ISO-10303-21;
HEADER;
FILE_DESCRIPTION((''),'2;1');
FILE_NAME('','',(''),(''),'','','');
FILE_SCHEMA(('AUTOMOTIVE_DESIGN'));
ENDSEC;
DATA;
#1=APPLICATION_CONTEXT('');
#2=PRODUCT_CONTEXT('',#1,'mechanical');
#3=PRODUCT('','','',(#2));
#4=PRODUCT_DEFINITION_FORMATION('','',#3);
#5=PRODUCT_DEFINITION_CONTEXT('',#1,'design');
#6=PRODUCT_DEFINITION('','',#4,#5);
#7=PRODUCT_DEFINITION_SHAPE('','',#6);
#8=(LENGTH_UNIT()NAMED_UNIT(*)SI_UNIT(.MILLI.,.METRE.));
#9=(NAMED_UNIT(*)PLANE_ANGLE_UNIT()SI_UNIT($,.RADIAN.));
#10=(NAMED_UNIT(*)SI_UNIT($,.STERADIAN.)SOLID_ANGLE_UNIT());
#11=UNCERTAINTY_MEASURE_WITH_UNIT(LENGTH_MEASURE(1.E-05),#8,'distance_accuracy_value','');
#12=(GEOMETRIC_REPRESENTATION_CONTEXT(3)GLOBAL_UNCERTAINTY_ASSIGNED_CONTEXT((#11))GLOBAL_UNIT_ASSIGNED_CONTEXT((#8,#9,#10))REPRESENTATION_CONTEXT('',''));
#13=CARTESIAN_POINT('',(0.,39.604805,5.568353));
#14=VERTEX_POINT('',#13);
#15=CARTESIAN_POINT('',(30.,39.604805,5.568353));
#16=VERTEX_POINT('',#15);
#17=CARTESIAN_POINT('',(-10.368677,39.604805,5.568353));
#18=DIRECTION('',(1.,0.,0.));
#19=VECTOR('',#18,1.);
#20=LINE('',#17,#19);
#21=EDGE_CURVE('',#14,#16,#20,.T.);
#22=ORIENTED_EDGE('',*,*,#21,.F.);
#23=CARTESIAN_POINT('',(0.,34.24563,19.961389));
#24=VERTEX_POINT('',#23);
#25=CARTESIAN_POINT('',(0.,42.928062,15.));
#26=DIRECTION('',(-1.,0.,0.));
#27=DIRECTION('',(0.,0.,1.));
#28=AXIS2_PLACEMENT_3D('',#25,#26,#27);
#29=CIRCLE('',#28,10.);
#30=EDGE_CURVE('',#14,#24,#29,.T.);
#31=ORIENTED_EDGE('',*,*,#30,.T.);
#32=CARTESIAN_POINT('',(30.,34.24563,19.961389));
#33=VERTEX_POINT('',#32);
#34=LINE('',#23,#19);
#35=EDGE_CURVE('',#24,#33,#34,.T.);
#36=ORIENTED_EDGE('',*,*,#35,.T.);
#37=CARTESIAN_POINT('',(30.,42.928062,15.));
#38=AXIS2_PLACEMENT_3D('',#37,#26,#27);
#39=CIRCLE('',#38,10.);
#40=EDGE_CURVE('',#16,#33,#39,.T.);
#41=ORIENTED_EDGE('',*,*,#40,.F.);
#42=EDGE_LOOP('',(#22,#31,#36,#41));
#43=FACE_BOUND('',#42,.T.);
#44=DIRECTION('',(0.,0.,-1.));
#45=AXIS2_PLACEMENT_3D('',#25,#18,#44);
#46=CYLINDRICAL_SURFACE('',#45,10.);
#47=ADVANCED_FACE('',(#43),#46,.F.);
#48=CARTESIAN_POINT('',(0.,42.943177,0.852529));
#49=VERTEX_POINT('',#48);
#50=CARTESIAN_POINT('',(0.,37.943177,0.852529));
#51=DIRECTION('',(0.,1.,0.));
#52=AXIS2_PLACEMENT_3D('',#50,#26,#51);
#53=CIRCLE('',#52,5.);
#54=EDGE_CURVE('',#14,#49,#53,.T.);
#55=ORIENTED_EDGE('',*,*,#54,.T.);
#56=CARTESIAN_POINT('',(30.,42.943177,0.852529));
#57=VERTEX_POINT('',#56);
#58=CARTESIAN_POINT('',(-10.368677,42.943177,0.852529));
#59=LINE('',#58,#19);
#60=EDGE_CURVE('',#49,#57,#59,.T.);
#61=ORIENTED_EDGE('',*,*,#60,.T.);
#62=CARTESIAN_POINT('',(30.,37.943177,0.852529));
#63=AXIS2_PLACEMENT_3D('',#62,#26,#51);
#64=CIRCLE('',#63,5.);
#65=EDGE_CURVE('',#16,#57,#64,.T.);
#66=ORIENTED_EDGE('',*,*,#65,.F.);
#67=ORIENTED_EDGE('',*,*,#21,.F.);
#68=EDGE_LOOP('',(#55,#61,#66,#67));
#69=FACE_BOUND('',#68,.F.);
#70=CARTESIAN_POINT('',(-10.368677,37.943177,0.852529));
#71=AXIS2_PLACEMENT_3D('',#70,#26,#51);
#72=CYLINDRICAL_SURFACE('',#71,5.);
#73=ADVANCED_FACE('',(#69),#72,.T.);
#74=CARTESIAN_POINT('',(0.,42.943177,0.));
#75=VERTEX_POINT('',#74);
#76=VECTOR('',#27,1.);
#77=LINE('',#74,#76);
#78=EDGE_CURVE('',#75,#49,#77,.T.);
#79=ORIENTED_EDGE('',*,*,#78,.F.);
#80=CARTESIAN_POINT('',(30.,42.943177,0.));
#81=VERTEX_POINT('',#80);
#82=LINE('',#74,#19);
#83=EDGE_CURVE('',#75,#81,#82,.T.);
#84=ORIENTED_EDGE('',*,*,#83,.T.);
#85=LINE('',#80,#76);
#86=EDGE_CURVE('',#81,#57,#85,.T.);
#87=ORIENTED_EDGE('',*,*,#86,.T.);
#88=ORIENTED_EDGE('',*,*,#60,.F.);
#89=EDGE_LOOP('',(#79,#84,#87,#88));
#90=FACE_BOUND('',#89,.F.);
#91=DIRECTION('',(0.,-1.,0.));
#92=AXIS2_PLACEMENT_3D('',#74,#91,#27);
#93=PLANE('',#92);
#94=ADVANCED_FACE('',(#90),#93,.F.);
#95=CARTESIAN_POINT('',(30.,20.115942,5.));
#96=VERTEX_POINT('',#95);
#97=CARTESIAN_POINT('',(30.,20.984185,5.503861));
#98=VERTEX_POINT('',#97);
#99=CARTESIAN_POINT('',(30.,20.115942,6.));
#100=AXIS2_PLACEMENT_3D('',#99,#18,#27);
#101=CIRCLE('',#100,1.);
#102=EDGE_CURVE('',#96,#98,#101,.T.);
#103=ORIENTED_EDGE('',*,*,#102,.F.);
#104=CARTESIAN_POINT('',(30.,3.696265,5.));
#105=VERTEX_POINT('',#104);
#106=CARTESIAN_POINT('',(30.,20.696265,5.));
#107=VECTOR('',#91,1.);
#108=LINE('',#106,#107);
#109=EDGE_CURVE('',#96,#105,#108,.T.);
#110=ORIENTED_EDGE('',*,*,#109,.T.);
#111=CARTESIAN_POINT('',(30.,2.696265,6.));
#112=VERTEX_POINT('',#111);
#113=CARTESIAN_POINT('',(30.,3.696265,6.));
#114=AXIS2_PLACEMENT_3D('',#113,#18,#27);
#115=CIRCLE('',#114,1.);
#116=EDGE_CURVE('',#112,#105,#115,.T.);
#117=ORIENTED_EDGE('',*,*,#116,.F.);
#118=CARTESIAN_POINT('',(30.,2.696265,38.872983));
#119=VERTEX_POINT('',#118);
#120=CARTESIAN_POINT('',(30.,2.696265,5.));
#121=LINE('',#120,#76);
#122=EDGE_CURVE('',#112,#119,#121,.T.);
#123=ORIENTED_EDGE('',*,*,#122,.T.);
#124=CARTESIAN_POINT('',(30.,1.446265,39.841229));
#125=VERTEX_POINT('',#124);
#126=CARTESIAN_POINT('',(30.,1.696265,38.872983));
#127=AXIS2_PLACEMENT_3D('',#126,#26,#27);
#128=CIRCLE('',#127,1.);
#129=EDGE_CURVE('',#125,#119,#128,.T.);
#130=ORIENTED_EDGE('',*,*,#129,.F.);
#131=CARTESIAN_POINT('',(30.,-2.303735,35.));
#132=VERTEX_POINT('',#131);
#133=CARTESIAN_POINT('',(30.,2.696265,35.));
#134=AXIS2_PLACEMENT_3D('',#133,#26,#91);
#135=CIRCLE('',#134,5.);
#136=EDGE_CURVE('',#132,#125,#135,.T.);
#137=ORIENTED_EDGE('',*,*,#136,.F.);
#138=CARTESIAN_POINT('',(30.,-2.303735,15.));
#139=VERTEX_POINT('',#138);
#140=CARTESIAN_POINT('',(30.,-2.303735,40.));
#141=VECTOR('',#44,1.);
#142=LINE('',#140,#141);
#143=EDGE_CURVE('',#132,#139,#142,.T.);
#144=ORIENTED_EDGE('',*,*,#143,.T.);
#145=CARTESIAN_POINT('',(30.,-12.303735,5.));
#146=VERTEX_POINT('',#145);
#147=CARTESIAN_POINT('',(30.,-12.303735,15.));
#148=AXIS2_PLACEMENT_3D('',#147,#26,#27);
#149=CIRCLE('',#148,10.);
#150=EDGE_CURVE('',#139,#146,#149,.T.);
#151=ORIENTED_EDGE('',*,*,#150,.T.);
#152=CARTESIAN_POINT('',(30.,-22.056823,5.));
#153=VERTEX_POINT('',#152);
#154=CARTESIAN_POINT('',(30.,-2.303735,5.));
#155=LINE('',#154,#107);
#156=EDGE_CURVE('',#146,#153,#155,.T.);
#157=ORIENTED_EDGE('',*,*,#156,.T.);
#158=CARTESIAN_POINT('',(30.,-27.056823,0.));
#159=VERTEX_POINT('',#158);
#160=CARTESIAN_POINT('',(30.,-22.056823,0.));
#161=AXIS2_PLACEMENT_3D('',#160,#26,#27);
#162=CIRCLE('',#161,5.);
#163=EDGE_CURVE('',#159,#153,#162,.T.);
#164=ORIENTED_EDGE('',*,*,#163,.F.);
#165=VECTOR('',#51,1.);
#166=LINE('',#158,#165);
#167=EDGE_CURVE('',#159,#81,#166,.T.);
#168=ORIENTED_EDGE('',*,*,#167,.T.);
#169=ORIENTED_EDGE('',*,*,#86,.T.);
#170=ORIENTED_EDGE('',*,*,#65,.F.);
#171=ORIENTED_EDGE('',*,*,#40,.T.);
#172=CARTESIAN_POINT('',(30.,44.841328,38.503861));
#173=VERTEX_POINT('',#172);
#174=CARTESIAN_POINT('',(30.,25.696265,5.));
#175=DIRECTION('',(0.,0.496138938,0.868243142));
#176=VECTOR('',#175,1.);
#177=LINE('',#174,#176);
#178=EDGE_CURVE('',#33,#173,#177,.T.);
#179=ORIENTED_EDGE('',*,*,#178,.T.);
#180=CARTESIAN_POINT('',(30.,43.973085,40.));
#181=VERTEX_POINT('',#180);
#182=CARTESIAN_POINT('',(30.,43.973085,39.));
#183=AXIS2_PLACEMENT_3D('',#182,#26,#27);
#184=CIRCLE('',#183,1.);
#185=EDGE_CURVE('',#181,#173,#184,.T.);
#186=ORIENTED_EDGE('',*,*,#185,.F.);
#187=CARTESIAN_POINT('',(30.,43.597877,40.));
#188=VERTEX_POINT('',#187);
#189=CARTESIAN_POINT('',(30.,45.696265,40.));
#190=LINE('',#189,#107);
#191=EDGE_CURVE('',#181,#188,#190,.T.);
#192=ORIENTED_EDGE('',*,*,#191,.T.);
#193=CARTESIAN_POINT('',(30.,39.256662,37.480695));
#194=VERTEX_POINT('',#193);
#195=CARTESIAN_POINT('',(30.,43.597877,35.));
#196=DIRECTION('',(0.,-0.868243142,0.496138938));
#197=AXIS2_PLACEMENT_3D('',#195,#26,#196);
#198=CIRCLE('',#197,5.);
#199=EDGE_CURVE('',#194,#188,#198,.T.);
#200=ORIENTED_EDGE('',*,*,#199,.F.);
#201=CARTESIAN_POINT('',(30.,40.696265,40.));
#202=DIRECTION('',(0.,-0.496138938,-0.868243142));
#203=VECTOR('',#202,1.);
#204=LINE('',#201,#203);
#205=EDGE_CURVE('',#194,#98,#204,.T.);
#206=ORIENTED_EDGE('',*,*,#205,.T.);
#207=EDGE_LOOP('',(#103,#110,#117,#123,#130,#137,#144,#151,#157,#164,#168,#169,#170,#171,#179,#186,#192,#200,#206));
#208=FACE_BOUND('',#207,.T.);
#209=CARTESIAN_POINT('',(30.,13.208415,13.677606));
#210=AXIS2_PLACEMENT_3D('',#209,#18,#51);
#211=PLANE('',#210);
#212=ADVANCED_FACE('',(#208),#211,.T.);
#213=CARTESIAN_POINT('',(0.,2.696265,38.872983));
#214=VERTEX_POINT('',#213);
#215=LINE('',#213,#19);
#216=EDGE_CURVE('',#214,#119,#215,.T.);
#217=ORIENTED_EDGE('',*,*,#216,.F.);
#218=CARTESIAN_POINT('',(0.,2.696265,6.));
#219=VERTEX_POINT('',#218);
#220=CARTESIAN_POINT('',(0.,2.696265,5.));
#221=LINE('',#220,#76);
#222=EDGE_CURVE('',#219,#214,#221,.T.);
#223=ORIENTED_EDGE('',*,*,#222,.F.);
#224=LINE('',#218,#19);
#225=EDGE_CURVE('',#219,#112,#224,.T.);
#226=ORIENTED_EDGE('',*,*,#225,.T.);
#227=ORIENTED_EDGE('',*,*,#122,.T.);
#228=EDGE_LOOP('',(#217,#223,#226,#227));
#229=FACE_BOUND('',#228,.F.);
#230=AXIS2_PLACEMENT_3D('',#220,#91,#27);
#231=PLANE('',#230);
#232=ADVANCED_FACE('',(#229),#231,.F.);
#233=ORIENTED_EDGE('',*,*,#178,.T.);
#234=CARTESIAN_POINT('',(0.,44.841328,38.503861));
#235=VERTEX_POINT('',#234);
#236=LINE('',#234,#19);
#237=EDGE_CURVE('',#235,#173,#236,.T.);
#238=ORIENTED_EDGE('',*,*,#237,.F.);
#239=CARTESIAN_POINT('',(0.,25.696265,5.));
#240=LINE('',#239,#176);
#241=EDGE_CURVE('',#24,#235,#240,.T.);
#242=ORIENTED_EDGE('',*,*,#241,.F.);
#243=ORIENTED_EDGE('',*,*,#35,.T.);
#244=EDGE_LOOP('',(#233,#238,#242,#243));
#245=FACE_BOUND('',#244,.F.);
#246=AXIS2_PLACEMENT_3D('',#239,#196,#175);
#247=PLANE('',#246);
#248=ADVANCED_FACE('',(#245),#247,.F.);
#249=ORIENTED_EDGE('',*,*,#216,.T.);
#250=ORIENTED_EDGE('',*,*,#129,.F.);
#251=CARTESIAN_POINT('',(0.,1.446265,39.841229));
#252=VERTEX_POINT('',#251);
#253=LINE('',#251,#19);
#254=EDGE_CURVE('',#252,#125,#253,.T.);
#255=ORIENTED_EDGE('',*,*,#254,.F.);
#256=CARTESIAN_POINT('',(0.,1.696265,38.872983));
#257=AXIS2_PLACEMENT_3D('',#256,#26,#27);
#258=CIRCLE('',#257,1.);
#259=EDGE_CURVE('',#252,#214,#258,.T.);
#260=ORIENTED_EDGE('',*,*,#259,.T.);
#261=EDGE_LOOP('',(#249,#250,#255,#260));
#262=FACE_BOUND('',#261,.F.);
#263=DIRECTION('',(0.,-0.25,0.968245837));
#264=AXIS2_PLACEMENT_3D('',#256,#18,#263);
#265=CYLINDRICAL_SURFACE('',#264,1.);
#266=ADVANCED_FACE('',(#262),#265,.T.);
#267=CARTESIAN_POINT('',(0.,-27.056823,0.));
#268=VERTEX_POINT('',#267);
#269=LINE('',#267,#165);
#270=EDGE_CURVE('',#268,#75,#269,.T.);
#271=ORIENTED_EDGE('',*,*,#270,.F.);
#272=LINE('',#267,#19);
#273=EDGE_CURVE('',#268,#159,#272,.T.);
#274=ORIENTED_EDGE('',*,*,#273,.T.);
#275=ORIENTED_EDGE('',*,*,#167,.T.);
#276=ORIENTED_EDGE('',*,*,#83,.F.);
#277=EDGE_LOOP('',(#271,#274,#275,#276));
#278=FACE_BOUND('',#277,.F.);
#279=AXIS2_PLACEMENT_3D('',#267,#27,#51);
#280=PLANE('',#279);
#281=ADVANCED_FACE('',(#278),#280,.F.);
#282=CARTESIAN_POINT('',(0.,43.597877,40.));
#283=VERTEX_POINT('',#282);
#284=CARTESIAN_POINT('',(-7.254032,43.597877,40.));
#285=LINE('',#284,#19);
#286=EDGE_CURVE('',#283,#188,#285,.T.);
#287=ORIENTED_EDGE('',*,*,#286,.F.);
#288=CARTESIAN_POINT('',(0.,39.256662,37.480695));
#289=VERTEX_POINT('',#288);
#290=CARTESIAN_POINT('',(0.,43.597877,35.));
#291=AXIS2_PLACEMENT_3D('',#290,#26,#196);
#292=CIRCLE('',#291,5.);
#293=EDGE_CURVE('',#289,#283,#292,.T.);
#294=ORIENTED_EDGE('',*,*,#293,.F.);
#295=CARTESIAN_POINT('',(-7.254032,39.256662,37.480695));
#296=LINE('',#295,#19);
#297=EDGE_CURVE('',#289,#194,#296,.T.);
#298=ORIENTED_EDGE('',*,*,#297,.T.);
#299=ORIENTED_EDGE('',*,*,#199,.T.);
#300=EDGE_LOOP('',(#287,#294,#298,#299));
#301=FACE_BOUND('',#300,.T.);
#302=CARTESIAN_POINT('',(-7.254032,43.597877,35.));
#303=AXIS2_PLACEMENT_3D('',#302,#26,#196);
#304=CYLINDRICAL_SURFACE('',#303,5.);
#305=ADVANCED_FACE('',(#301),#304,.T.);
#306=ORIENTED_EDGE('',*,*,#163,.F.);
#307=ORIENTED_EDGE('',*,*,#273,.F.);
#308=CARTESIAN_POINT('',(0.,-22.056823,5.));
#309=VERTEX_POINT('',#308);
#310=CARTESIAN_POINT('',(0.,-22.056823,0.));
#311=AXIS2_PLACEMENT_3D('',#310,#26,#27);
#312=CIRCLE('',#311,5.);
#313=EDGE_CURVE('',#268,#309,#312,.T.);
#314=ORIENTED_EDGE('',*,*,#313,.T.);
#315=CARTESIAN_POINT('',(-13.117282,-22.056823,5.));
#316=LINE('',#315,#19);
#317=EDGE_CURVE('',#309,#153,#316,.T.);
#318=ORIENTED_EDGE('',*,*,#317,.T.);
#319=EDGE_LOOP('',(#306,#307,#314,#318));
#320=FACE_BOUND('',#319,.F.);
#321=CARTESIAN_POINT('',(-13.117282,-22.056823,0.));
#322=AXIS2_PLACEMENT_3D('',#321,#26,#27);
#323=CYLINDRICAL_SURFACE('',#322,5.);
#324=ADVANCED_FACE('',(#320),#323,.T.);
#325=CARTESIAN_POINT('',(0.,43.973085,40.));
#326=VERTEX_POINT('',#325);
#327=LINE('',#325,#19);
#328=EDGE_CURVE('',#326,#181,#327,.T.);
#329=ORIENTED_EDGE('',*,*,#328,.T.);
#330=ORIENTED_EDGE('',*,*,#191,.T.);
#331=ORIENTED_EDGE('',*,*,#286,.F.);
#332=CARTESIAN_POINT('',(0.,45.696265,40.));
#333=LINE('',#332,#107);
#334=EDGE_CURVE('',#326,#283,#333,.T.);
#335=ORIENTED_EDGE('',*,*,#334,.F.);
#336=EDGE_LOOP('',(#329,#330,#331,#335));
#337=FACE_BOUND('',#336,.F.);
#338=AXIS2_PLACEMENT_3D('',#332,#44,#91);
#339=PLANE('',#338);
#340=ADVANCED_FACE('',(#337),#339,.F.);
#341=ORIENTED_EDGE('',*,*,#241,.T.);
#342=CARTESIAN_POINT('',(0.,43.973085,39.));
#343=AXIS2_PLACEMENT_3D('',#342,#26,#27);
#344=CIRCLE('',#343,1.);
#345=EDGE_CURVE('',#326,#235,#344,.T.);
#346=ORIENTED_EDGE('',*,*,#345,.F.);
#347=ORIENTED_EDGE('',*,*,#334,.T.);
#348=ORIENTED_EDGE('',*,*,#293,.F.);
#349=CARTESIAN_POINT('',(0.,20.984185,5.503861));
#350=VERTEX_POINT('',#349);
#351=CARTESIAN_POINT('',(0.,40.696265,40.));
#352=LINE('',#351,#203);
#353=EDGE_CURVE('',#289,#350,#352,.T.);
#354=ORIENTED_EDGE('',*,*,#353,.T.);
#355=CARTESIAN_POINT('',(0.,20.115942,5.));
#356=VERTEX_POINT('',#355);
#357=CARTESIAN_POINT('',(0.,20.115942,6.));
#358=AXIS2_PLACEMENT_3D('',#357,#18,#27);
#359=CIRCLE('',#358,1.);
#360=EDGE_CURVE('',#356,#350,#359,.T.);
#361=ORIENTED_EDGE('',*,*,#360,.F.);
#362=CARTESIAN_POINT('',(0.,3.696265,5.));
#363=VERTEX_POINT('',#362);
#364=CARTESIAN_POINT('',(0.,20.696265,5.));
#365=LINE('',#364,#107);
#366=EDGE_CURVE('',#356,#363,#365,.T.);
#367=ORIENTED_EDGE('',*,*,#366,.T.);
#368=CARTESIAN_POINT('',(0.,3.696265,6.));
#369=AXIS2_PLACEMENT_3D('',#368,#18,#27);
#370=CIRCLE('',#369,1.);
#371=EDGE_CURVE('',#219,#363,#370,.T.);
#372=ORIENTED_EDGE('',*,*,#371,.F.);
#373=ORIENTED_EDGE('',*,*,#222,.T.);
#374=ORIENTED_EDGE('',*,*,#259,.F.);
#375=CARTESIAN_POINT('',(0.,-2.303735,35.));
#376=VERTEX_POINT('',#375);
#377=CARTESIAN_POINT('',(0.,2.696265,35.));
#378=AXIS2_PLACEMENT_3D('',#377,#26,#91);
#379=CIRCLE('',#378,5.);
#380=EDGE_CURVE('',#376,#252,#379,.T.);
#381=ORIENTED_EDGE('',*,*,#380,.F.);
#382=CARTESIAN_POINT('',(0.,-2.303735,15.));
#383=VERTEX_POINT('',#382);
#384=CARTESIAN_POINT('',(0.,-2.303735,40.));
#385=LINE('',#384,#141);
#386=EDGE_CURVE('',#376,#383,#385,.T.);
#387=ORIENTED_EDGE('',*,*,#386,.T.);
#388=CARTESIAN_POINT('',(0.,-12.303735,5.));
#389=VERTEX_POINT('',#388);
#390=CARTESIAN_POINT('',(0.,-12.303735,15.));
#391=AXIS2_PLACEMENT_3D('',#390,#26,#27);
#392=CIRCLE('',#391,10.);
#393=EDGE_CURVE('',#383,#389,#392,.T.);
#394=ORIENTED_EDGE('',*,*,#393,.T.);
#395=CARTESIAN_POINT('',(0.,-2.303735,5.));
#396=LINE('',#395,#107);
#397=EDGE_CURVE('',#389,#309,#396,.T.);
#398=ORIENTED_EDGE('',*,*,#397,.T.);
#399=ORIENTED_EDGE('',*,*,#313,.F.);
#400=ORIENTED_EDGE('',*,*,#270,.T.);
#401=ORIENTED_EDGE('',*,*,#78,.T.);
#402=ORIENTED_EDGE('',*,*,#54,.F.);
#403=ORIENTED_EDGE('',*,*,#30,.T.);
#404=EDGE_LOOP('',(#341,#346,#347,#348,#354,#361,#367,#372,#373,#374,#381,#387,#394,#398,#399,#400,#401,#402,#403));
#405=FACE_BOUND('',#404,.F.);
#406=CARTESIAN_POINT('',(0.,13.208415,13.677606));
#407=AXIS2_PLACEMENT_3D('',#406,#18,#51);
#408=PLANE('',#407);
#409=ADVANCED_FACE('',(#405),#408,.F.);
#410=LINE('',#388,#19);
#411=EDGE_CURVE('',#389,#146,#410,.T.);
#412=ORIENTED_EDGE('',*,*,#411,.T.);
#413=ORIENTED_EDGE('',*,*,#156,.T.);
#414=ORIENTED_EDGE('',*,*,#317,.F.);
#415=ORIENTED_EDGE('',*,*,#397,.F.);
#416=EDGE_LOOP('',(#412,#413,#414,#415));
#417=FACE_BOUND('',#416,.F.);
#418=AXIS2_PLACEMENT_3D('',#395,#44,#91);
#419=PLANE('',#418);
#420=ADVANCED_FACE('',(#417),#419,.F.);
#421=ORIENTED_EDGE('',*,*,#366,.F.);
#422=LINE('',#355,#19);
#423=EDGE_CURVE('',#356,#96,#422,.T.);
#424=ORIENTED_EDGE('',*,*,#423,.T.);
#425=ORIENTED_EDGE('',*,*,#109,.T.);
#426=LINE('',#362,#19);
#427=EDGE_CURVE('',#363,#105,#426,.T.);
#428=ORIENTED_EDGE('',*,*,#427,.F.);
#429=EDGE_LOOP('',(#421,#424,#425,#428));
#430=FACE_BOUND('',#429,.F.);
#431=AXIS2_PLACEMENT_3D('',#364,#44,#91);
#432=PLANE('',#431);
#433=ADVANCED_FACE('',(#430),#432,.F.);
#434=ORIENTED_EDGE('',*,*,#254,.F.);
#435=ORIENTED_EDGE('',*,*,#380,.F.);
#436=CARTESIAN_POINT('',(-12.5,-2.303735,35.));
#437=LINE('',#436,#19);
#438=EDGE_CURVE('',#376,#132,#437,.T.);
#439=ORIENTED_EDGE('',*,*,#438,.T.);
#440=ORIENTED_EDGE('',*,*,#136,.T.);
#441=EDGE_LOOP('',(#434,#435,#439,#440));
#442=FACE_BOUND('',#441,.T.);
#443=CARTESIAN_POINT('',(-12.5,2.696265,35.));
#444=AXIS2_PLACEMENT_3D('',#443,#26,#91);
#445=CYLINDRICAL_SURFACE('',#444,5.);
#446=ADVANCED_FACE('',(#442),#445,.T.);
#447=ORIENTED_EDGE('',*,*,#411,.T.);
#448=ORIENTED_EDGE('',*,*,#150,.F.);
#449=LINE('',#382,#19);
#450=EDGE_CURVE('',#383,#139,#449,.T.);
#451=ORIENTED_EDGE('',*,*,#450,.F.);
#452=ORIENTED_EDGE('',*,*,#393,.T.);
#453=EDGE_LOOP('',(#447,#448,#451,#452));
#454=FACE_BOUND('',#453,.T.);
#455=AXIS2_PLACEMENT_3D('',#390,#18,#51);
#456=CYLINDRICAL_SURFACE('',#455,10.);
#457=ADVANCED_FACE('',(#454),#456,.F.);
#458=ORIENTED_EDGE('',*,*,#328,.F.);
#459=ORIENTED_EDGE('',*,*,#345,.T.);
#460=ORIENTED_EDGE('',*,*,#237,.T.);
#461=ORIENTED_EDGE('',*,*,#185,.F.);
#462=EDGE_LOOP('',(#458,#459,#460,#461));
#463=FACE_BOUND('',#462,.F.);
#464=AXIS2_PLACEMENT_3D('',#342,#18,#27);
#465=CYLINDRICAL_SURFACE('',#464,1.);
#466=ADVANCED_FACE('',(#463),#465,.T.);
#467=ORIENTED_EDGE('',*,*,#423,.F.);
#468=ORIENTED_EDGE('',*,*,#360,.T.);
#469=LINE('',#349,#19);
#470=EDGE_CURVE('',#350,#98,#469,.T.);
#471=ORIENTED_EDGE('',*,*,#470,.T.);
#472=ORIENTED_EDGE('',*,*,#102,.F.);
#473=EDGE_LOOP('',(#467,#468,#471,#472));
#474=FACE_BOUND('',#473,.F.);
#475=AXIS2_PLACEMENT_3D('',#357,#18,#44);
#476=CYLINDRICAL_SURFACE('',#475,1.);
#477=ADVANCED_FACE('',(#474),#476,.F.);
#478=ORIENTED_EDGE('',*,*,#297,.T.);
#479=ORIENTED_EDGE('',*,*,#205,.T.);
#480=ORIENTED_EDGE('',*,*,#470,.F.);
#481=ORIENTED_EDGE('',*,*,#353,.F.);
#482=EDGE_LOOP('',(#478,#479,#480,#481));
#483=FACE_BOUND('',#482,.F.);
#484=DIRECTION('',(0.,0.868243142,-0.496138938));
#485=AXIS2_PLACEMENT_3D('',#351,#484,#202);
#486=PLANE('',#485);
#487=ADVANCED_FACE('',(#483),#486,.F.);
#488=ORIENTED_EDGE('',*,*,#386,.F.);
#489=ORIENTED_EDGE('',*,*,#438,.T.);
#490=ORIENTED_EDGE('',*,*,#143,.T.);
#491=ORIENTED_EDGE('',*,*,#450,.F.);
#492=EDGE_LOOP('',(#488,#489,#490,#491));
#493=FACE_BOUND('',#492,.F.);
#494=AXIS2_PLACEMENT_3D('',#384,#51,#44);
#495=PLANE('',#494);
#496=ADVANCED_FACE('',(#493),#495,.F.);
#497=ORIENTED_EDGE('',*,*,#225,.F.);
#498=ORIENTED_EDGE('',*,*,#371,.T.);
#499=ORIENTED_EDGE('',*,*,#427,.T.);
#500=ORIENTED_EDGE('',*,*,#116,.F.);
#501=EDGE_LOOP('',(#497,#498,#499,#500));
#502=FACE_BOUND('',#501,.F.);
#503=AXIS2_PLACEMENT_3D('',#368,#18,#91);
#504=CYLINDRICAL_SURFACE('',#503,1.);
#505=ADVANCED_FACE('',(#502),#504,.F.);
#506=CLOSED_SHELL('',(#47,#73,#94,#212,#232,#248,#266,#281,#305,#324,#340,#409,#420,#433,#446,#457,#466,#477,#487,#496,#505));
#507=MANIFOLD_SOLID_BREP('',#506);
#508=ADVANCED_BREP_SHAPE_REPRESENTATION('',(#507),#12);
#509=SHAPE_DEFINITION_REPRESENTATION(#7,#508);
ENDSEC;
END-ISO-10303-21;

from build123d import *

# Parameters (mm, degrees)
F1_DEPTH    = 30
F2_R        = 10
F3_T1_DEPTH = 56.2345635929
F3_T3_DEPTH = 50.7373541457
F3_T5_DEPTH = 44.5080633868
F3_T7_DEPTH = 55
F4_R        = 1


# Not quite as in the source:
# - a fillet or chamfer that OpenCascade refuses, or shapes differently, is made with other operations: its cross-section is extruded or revolved along the edge and cut away or added


with BuildPart() as f1:
    # F0 (on Right) → F1 (new body)
    with BuildSketch(Plane.YZ):
        Polygon((-27.3037352718, 5), (-27.0568225533, 0), (42.9431774467, 0), (42.9431774467, 5), (25.6962647282, 5), (45.6962647282, 40), (40.6962647282, 40), (20.6962647282, 5), (8.8888889937, 5), (2.6962647282, 5), (2.6962647282, 40), (-2.3037352718, 40), (-2.3037352718, 5), align=None)
    extrude(amount=F1_DEPTH)

    # F2
    f2_edges = [f1.edges().sort_by_distance(p)[0] for p in [
        (15, 25.696265, 5),
        (15, -2.303735, 5),
    ]]
    fillet(f2_edges, radius=F2_R)

    # F3: fillet of radius 5 on 4 edges, made by hand

    # F3_s2 → F3_t1 (cut)
    with BuildSketch(Plane.YZ.offset(-13.1172817964)):
        with BuildLine():
            ThreePointArc((-22.0568225533, 5), (-25.5923564592, 3.5355339059), (-27.0568225533, 0))
            Line((-27.0568225533, 0), (-27.3037352718, 5))
            Line((-27.3037352718, 5), (-22.0568225533, 5))
        make_face()
    extrude(amount=F3_T1_DEPTH, mode=Mode.SUBTRACT)

    # F3_s4 → F3_t3 (cut)
    with BuildSketch(Plane.YZ.offset(-10.3686770729)):
        with BuildLine():
            ThreePointArc((42.9431774467, 0.8525291709), (42.0241172961, 3.7414614903), (39.6048054683, 5.5683527806))
            Line((39.6048054683, 5.5683527806), (39.7709682705, 6.0399351415))
            ThreePointArc((39.7709682705, 6.0399351415), (42.9280615114, 5.5), (42.9431774467, 5.5))
            Line((42.9431774467, 5.5), (43.4431774467, 5))
            Line((43.4431774467, 5), (43.4431774467, 0.8525291709))
            Line((43.4431774467, 0.8525291709), (42.9431774467, 0.8525291709))
        make_face()
    extrude(amount=F3_T3_DEPTH, mode=Mode.SUBTRACT)

    # F3_s6 → F3_t5 (cut)
    with BuildSketch(Plane.YZ.offset(-7.2540316934)):
        with BuildLine():
            ThreePointArc((39.2566616949, 37.4806946918), (41.0882433145, 39.3245504656), (43.5978774055, 40))
            Line((43.5978774055, 40), (40.6962647282, 40))
            Line((40.6962647282, 40), (39.2566616949, 37.4806946918))
        make_face()
    extrude(amount=F3_T5_DEPTH, mode=Mode.SUBTRACT)

    # F3_s8 → F3_t7 (cut)
    with BuildSketch(Plane.YZ.offset(-12.5)):
        with BuildLine():
            ThreePointArc((-2.3037352718, 35), (-0.8392691778, 38.5355339059), (2.6962647282, 40))
            Line((2.6962647282, 40), (-2.3037352718, 40))
            Line((-2.3037352718, 40), (-2.3037352718, 35))
        make_face()
    extrude(amount=F3_T7_DEPTH, mode=Mode.SUBTRACT)

    # F4
    f4_edges = [f1.edges().sort_by_distance(p)[0] for p in [
        (15, 2.696265, 5),
        (15, 20.696265, 5),
        (15, 2.696265, 40),
        (15, 45.696265, 40),
    ]]
    fillet(f4_edges, radius=F4_R)


solid = f1.part
